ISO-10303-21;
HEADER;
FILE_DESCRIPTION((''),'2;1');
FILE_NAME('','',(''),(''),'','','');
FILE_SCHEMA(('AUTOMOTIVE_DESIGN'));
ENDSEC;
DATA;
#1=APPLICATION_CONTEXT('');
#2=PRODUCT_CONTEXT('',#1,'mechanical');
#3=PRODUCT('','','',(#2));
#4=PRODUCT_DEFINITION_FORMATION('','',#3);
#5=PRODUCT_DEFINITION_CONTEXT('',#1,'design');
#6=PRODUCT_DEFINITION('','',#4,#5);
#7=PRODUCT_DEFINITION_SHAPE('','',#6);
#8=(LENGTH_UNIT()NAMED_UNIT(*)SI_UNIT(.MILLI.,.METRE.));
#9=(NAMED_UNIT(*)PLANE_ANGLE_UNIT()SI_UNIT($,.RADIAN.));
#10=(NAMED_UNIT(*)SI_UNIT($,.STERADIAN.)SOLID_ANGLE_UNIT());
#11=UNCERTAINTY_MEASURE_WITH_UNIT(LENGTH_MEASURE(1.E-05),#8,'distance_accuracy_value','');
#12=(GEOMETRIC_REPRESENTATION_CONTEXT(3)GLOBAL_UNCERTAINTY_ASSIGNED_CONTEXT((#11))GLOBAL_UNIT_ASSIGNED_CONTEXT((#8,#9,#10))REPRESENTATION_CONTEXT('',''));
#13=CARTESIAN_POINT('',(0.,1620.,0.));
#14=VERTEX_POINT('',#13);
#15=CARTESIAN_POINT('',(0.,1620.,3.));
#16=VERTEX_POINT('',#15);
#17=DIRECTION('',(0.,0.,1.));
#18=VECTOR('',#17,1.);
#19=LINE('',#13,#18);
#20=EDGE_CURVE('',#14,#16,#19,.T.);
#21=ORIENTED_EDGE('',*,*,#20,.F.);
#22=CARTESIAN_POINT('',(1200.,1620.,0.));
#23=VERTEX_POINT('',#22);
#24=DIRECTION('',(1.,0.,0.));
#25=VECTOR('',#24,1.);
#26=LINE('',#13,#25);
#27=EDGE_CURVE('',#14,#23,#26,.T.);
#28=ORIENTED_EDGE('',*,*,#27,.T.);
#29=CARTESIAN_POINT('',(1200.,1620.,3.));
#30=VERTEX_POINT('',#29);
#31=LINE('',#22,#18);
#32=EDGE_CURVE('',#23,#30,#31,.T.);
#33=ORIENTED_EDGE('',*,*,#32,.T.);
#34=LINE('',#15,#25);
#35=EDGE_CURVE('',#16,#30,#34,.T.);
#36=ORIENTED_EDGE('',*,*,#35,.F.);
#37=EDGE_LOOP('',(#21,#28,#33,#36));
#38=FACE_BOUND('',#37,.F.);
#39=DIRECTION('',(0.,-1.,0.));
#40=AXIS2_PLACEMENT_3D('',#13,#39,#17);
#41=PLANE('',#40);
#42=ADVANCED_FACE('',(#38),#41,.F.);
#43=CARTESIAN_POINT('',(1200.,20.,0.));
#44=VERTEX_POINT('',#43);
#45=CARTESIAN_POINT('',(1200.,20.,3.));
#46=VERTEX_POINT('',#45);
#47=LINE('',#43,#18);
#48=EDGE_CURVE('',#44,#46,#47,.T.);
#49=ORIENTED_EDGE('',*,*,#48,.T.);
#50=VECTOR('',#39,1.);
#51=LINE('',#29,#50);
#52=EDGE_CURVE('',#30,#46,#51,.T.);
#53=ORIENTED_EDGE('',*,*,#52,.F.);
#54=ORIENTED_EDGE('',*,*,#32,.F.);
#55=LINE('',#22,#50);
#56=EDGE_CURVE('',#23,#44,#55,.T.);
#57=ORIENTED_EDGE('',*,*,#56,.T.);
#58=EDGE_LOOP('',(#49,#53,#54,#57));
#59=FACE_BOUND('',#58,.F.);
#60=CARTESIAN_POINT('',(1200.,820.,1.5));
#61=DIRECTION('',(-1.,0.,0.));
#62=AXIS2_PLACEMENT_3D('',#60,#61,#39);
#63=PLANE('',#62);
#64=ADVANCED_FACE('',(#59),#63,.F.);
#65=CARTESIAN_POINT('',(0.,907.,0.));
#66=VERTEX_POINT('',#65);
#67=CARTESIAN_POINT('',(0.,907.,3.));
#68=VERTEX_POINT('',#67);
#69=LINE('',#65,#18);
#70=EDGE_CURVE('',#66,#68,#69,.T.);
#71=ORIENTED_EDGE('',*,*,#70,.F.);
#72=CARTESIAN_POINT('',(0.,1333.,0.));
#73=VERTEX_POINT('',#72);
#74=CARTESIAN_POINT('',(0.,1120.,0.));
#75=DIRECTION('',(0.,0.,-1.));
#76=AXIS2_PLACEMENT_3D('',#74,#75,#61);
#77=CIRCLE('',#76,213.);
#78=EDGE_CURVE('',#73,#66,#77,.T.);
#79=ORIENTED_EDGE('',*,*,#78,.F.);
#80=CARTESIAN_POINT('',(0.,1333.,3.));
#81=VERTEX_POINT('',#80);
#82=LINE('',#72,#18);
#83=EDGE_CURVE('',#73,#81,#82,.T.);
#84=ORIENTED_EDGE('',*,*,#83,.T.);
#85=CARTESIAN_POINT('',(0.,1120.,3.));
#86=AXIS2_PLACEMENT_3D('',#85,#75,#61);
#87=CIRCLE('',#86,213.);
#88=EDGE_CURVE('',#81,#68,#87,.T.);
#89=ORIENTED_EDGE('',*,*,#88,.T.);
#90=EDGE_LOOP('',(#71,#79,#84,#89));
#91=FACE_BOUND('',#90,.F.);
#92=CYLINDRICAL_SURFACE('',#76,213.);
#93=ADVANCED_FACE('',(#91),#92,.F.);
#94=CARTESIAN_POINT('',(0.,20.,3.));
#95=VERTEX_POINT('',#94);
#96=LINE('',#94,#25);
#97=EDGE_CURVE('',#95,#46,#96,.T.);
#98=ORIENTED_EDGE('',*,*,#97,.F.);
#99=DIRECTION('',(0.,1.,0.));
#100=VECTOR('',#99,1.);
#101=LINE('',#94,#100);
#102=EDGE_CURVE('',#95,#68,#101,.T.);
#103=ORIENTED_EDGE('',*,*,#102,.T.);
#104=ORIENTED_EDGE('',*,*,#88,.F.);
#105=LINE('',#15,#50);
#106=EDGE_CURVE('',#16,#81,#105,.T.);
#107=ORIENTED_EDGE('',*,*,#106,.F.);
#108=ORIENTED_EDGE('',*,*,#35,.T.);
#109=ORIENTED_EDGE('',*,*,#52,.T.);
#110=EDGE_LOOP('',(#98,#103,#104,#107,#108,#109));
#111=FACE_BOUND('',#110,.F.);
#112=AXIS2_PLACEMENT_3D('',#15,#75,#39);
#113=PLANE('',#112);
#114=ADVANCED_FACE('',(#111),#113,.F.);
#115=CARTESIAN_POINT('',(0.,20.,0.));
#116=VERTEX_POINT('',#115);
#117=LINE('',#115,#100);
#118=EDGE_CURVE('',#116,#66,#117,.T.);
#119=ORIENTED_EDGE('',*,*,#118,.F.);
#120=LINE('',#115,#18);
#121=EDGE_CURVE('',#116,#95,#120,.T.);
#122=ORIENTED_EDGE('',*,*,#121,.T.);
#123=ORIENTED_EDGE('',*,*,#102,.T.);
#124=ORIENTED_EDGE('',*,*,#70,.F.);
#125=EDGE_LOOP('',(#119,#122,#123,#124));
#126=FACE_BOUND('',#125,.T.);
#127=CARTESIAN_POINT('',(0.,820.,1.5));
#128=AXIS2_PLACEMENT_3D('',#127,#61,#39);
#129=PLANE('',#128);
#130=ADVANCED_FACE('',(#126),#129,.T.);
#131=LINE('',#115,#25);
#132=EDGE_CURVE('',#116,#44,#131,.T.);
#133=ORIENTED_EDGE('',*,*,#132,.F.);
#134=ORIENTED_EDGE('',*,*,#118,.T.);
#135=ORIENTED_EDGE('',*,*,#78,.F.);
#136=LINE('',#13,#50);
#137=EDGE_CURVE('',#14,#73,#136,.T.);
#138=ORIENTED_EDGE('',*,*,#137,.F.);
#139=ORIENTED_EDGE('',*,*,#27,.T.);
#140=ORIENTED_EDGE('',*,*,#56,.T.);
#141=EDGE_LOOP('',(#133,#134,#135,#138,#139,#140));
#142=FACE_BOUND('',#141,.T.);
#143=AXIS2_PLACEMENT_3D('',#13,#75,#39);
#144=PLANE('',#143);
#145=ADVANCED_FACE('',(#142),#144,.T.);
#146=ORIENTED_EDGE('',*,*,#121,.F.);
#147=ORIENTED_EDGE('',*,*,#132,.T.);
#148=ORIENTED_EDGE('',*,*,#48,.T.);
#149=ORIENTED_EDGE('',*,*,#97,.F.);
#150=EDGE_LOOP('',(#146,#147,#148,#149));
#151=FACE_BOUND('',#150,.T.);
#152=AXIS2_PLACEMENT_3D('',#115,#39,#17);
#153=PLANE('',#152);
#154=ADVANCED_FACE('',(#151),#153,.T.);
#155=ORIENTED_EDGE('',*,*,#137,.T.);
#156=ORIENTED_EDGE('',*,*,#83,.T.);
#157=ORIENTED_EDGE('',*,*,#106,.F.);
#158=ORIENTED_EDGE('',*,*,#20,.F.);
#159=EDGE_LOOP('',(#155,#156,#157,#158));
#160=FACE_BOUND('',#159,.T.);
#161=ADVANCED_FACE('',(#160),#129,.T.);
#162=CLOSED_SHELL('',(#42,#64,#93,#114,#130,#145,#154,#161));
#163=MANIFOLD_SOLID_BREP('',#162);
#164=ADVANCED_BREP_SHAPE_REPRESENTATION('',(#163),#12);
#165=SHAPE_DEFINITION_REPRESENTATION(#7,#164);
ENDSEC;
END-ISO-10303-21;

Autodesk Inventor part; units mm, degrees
ref_plane "YZ Plane" through (0, 0, 0) normal (1, 0, 0) x (0, 1, 0)
ref_plane "XZ Plane" through (0, 0, 0) normal (0, 1, 0) x (-1, 0, 0)
ref_plane "XY Plane" through (0, 0, 0) normal (0, 0, 1) x (1, 0, 0)
sketch "Sketch1" plane through (0, 0, 0) normal (1, 0, 0) x (0, 1, 0)
  line L0 (1620, 0) -> (70, 0)
  line L1 (70, 0) -> (20, 0)
  line L2 (20, 0) -> (0, 0)
  dimension "d0" = 180
  dimension "d1" = 50
  dimension "d2" = 1620
  dimension "d3" = 20
contour flange "Contour Flange1" sketch "Sketch1" thickness 3 bend radius 3 width 1200 along (1, 0, 0) mid plane no both sides no wall seen from (0, 845, 0) lies toward (0, 0, 1) curves L0 L1
bend "Bend1"
corner "Corner1"
sketch "Sketch3" plane through (0, 49.7046, 0) normal (0, 0, -1) x (-1, 0, 0)
  line L0 (-1197.5147, 1570.2954) -> (-1197.5147, -29.7046) construction
  line L1 (0, 1570.2954) -> (0, -29.7046)
  line L2 (-1200, 1570.2954) -> (0, 1570.2954) construction
  line L3 (0, 1570.2954) -> (0, -29.7046) projected
  circle A0 centre (0, 1070.2954) radius 213
  line L4 (0, -29.7046) -> (-1200, -29.7046) projected
  point P0 (0, -49.7046)
  point P1 (0, 0)
  point P2 (0, 857.2954)
  point P3 (0, 1283.2954)
  dimension "d25" = 426
  dimension "d26" = 500
extrude "Cut1" cut sketch "Sketch3" against normal blind 3 contours L1 A0 picked at (-58.5713, 1129.0628)
sketch "Sketch2" plane through (1197.8787, 20, 0.8787) normal (0.7071068, 0, 0.7071068) x (0, 1, 0)
  line L0 (1600, 0) -> (0, 0)
  line L1 (0, 0) -> (0, -50)
  line L2 (0, -50) -> (1600, -50)
  line L3 (1600, -50) -> (1600, 0)
equation "\"d27\" = Thickness"
equation "\"d4\" = Thickness"
equation "\"d5\" = BendReliefWidth"
equation "\"d6\" = BendReliefDepth"
equation "\"d7\" = MinimumRemnant"
equation "\"d8\" = TransitionRadius"
equation "\"d10\" = BendRadius"
equation "\"d12\" = CornerReliefSize"
equation "\"d13\" = GapSize"
equation "\"d14\" = JacobiRadiusSize"
equation "\"BendRadius\" = Thickness"
equation "\"BendReliefWidth\" = Thickness"
equation "\"BendReliefDepth\" = 0.5 * Thickness"
equation "\"CornerReliefSize\" = 4 * Thickness"
equation "\"MinimumRemnant\" = 2 * Thickness"
equation "\"TransitionRadius\" = BendRadius"
equation "\"JacobiRadiusSize\" = BendRadius"
equation "\"GapSize\" = Thickness"
equation "\"Thickness\" = 3"
properties part number "GBK-RK-0017 long wall 3"
